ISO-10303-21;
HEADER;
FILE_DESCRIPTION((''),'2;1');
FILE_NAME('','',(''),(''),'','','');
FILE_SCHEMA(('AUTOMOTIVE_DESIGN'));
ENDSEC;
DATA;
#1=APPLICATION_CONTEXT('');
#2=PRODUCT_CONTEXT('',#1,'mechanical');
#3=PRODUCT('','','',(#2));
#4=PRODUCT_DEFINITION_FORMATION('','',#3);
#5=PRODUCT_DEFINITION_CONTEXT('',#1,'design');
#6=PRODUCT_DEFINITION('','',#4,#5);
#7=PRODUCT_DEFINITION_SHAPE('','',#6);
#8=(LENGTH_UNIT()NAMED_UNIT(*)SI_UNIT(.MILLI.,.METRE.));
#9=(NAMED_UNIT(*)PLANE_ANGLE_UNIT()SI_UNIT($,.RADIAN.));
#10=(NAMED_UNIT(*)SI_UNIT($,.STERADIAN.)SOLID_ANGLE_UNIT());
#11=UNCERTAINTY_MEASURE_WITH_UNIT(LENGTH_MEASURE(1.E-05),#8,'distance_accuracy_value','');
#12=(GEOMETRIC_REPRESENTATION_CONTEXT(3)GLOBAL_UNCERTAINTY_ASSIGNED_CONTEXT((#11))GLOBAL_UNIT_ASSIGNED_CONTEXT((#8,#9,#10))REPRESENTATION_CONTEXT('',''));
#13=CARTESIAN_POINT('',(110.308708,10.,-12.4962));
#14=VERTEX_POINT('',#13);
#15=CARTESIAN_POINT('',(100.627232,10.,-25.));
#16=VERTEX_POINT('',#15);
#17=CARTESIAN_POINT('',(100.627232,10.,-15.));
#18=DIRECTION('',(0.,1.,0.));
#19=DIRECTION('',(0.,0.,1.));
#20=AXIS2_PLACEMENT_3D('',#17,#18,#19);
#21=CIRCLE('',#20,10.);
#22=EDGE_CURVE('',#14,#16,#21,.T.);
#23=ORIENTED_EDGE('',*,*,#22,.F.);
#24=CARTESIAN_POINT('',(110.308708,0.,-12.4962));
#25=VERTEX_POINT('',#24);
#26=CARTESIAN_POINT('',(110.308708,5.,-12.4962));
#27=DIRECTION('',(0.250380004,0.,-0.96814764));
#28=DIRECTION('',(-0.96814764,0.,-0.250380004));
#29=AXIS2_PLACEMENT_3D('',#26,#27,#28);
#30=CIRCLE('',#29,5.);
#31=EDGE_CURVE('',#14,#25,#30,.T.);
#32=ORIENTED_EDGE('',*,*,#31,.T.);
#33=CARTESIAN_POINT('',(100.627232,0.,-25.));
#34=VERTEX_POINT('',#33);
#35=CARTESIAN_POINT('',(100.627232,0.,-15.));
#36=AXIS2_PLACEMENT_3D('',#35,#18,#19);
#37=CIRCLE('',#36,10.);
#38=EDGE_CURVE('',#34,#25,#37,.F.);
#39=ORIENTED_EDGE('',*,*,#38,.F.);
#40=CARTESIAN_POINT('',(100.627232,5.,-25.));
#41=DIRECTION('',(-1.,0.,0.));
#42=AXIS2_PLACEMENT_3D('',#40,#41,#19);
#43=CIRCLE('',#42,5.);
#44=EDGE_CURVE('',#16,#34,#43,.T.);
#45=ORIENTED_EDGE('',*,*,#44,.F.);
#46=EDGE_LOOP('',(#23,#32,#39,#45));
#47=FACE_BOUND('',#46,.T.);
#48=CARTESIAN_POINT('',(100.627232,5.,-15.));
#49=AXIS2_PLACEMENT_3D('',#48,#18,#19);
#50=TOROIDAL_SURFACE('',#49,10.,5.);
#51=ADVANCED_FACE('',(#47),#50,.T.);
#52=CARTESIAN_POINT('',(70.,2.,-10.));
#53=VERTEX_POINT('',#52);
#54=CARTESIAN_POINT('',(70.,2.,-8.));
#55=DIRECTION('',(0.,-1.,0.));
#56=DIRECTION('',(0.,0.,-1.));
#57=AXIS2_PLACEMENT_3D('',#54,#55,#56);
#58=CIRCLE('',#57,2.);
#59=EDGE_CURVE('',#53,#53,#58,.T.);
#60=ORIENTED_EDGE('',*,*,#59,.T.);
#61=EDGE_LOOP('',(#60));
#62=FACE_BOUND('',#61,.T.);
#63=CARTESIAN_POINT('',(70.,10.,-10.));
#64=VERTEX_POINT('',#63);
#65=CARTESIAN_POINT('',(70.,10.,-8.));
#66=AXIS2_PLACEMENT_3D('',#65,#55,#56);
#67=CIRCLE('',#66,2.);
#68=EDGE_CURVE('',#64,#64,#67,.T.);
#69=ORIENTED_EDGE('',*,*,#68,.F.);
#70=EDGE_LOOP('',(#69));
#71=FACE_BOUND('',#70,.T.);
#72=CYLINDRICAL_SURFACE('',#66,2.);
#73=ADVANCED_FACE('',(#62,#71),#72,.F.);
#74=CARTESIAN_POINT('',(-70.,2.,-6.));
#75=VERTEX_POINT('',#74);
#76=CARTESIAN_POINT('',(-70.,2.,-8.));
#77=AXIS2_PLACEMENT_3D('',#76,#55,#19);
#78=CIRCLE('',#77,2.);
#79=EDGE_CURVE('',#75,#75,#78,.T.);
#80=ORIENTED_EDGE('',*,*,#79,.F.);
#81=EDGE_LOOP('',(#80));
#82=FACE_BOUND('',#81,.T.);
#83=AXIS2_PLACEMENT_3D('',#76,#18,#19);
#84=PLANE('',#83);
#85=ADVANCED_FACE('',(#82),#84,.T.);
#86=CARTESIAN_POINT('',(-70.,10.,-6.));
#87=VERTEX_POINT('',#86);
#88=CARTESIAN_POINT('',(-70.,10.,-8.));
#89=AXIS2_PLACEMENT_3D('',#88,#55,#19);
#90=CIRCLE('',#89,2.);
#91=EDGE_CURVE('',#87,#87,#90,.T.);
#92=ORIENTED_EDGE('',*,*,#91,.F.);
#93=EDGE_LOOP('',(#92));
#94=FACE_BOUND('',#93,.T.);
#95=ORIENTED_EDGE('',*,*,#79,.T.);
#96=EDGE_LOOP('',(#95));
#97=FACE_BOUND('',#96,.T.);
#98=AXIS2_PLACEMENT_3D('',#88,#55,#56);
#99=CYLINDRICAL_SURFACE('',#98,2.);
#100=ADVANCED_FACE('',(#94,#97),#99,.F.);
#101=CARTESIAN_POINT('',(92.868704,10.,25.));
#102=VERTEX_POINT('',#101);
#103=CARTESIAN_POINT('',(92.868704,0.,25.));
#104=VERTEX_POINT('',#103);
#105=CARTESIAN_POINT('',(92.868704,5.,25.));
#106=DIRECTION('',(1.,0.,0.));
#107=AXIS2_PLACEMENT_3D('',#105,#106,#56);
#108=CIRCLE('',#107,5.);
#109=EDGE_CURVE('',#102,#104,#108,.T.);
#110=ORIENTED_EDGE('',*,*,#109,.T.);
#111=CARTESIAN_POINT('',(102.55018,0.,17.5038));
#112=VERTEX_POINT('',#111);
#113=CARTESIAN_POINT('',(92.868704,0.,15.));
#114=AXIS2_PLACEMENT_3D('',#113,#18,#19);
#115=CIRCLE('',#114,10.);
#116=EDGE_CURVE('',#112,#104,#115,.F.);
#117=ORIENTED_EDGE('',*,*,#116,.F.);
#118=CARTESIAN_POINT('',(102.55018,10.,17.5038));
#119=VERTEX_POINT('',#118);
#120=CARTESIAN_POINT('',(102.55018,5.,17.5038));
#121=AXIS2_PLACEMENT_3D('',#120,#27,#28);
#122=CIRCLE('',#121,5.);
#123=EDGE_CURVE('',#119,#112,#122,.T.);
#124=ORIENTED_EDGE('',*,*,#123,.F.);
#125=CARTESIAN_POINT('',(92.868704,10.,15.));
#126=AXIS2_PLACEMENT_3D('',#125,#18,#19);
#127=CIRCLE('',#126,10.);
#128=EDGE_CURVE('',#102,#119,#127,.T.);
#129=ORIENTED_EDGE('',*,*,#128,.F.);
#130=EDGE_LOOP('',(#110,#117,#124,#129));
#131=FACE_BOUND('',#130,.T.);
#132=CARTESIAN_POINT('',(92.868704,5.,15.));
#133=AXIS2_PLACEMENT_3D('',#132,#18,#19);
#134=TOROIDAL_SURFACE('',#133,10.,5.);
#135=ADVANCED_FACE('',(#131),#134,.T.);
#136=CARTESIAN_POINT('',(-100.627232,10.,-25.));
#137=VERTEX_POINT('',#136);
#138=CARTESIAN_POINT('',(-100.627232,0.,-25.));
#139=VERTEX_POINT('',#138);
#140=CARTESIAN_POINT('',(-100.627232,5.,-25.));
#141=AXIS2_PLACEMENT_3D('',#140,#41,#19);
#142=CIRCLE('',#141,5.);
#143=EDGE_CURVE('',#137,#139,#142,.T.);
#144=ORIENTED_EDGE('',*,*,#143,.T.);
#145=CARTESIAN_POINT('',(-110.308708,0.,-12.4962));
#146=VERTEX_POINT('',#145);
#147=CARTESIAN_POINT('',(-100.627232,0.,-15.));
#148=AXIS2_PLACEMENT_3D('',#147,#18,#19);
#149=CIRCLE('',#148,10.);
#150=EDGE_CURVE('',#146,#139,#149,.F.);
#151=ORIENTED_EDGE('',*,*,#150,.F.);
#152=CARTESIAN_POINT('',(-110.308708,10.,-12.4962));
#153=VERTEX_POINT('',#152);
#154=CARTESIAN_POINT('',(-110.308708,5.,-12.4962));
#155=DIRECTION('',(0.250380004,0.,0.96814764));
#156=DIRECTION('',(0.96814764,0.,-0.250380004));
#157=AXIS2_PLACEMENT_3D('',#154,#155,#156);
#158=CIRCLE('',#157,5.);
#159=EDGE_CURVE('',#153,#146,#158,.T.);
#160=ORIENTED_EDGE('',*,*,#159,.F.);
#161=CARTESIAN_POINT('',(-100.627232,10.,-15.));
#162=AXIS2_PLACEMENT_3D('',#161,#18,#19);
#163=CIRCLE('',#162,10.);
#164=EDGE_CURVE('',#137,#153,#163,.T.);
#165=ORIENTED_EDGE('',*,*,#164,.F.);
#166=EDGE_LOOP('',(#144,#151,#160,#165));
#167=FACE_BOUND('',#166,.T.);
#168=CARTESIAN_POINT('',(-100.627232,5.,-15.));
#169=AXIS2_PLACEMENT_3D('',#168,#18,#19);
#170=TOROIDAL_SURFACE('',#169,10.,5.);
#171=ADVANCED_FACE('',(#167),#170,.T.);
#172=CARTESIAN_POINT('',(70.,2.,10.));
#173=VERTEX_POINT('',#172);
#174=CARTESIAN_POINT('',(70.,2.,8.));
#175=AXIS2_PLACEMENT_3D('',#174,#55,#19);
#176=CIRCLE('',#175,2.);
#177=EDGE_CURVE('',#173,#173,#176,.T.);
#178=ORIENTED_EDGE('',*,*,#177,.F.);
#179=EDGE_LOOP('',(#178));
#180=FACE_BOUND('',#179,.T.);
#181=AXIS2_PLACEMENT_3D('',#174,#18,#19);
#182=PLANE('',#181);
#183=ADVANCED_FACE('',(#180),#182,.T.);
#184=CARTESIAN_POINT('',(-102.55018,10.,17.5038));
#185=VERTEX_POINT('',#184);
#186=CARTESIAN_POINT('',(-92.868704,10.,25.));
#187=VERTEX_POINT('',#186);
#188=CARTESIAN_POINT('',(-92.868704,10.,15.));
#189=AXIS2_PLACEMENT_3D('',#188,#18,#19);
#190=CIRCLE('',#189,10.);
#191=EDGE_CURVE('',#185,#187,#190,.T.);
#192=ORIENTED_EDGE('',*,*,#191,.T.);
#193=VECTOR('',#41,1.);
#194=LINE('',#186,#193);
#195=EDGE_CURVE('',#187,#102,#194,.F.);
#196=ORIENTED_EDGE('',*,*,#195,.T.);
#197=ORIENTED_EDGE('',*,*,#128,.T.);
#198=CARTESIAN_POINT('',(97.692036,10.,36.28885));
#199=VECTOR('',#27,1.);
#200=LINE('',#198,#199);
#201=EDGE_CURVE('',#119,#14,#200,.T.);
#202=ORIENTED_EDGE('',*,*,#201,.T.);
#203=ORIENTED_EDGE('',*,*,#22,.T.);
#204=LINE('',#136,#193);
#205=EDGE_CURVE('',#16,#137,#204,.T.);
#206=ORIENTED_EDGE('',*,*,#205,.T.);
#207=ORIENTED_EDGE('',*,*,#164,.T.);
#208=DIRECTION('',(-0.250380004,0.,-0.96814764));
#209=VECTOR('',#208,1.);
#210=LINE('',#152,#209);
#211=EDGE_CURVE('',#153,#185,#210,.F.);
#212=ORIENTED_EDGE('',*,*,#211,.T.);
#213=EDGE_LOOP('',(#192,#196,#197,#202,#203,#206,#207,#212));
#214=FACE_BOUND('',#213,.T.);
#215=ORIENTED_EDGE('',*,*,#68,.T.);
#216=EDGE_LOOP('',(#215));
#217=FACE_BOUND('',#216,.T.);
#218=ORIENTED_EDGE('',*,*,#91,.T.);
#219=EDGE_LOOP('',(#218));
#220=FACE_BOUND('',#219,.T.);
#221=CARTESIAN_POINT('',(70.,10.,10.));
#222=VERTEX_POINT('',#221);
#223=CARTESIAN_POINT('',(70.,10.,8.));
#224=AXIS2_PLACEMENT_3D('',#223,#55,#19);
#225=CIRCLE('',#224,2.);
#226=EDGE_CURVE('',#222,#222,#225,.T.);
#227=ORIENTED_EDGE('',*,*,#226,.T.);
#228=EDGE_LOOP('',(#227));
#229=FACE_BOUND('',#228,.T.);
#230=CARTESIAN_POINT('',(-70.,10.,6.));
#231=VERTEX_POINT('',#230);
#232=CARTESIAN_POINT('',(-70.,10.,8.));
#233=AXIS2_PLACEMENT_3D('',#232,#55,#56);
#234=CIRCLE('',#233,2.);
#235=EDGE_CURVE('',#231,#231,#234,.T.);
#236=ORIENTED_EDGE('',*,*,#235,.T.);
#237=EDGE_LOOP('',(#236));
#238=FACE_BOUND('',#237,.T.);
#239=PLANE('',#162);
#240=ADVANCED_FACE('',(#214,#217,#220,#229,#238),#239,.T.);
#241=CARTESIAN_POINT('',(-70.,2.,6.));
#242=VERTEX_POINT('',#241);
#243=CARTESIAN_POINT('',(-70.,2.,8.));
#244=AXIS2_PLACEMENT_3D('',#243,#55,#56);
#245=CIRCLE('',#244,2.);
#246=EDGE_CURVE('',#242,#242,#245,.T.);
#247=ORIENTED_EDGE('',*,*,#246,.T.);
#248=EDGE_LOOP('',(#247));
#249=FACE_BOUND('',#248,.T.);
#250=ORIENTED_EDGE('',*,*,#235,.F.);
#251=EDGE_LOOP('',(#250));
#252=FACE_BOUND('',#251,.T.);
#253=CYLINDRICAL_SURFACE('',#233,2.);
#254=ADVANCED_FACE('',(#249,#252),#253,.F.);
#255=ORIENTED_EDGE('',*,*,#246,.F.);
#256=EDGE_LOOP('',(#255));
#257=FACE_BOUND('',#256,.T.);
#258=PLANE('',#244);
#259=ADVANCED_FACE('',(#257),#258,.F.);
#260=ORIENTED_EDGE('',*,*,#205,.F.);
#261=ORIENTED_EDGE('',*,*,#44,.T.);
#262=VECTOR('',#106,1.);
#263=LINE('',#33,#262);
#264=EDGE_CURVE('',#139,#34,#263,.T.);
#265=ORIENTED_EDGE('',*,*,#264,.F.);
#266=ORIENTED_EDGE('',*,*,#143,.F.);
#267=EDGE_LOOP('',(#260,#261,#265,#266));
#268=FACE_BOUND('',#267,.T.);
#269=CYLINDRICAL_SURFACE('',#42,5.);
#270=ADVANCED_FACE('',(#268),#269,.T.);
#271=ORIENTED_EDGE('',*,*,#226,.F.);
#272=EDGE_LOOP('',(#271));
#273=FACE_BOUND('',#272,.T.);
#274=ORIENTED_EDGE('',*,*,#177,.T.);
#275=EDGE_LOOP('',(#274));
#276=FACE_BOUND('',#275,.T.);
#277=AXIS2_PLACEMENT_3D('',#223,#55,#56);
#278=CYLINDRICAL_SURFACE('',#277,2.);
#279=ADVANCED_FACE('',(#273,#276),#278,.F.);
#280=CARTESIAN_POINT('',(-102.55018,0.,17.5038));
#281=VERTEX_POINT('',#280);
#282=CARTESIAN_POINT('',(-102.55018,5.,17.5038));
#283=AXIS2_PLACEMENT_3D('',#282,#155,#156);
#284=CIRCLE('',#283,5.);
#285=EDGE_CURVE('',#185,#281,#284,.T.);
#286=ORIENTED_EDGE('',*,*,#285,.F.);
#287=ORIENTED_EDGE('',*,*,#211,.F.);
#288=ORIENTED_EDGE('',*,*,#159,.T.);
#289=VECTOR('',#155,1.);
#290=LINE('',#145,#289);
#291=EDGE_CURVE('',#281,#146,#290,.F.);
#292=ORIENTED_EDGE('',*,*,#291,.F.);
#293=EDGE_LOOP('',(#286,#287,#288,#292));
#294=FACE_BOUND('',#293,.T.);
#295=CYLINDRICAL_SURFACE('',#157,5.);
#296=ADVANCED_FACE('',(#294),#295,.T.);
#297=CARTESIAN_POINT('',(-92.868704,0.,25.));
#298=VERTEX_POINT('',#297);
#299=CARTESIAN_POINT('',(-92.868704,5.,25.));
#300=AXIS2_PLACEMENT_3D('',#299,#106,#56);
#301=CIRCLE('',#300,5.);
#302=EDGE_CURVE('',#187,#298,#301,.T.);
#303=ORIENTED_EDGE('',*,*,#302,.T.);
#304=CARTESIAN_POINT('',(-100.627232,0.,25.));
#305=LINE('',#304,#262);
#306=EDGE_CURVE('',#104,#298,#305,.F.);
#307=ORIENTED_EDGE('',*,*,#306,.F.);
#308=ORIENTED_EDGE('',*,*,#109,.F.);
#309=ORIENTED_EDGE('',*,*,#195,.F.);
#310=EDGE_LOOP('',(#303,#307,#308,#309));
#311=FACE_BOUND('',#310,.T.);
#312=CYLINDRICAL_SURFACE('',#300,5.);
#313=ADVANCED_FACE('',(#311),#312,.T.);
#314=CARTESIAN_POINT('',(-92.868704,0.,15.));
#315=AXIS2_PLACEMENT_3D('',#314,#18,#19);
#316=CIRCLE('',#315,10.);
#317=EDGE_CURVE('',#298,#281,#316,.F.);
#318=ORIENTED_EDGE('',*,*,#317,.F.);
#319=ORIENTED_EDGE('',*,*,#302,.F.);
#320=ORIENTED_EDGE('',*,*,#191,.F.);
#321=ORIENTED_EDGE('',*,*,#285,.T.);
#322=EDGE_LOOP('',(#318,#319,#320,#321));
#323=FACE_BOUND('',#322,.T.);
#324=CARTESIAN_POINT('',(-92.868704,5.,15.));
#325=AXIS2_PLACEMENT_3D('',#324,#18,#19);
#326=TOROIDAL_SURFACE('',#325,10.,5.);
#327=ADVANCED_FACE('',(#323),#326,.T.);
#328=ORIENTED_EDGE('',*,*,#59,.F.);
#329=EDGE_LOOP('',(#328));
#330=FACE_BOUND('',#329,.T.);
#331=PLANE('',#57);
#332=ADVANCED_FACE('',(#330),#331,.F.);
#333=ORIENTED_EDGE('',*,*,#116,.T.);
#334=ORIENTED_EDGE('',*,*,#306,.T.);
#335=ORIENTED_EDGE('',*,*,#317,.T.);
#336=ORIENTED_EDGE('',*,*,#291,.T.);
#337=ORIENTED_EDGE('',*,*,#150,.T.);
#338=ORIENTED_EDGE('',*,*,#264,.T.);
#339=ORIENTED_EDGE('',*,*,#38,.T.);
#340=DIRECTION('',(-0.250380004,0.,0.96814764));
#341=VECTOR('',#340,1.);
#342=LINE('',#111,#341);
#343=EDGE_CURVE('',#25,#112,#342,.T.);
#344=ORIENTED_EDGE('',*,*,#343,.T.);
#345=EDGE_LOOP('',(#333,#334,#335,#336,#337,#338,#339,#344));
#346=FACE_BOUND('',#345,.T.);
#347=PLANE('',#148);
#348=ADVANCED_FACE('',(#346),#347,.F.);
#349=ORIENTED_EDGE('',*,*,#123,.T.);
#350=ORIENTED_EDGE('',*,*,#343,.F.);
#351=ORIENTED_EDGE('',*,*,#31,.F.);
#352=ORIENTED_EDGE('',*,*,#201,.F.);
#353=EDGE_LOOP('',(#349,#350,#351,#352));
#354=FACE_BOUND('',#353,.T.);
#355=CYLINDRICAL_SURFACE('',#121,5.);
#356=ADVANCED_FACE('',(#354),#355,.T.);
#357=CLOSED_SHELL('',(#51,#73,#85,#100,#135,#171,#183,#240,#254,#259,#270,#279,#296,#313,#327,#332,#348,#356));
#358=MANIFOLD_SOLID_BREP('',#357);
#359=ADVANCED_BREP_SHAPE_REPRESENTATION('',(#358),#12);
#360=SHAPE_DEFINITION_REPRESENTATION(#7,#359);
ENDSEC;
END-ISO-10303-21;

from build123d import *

# Parameters (mm, degrees)
BOSS_EXTRUDE1_DEPTH = 10
FILLET1_R           = 5
CUT_EXTRUDE3_START  = -2
SKETCH3_R           = 2
CUT_EXTRUDE3_DEPTH  = 8


with BuildPart() as part:
    # Sketch1 → Boss-Extrude1 (new body)
    with BuildSketch(Plane(origin=(0, 0, 0), x_dir=(1, 0, 0), z_dir=(0, 1, 0))):
        with BuildLine():
            Line((115.149446157, 11.244299939), (107.390918627, -18.755700061))
            ThreePointArc((107.390918627, -18.755700061), (102.051963222, -26.860343606), (92.868704021, -30))
            Line((92.868704021, -30), (-92.868704021, -30))
            ThreePointArc((-92.868704021, -30), (-102.051963222, -26.860343606), (-107.390918627, -18.755700061))
            Line((-107.390918627, -18.755700061), (-115.149446157, 11.244299939))
            ThreePointArc((-115.149446157, 11.244299939), (-112.487575158, 24.183259201), (-100.627231552, 30))
            Line((-100.627231552, 30), (100.627231552, 30))
            ThreePointArc((100.627231552, 30), (112.487575158, 24.183259201), (115.149446157, 11.244299939))
        make_face()
    extrude(amount=BOSS_EXTRUDE1_DEPTH)

    # Fillet1
    fillet1_edges = [part.edges().sort_by_distance(p)[0] for p in [
        (0, 0, 30),
        (-102.051963222, 0, 26.860343606),
        (-111.270182392, 0, 3.755700061),
        (-112.487575158, 0, -24.183259201),
        (0, 10, 30),
        (102.051963222, 10, 26.860343606),
        (111.270182392, 10, 3.755700061),
        (112.487575158, 10, -24.183259201),
        (0, 10, -30),
        (0, 0, -30),
        (-111.270182392, 10, 3.755700061),
        (111.270182392, 0, 3.755700061),
    ]]
    fillet(fillet1_edges, radius=FILLET1_R - 0.0001)  # a hair under: the kernel refuses the full size

    # Sketch3 → Cut-Extrude3 (cut)
    with BuildSketch(Plane.XZ.offset(CUT_EXTRUDE3_START)):
        with Locations(Location((-70, 8, 0), (0, 0, 270))):
            Circle(SKETCH3_R)
        with Locations(Location((-70, -8, 0), (0, 0, 90))):
            Circle(SKETCH3_R)
        with Locations(Location((70, -8, 0), (0, 0, 270))):
            Circle(SKETCH3_R)
        with Locations(Location((70, 8, 0), (0, 0, 90))):
            Circle(SKETCH3_R)
    extrude(amount=-CUT_EXTRUDE3_DEPTH, mode=Mode.SUBTRACT)


solid = part.part
